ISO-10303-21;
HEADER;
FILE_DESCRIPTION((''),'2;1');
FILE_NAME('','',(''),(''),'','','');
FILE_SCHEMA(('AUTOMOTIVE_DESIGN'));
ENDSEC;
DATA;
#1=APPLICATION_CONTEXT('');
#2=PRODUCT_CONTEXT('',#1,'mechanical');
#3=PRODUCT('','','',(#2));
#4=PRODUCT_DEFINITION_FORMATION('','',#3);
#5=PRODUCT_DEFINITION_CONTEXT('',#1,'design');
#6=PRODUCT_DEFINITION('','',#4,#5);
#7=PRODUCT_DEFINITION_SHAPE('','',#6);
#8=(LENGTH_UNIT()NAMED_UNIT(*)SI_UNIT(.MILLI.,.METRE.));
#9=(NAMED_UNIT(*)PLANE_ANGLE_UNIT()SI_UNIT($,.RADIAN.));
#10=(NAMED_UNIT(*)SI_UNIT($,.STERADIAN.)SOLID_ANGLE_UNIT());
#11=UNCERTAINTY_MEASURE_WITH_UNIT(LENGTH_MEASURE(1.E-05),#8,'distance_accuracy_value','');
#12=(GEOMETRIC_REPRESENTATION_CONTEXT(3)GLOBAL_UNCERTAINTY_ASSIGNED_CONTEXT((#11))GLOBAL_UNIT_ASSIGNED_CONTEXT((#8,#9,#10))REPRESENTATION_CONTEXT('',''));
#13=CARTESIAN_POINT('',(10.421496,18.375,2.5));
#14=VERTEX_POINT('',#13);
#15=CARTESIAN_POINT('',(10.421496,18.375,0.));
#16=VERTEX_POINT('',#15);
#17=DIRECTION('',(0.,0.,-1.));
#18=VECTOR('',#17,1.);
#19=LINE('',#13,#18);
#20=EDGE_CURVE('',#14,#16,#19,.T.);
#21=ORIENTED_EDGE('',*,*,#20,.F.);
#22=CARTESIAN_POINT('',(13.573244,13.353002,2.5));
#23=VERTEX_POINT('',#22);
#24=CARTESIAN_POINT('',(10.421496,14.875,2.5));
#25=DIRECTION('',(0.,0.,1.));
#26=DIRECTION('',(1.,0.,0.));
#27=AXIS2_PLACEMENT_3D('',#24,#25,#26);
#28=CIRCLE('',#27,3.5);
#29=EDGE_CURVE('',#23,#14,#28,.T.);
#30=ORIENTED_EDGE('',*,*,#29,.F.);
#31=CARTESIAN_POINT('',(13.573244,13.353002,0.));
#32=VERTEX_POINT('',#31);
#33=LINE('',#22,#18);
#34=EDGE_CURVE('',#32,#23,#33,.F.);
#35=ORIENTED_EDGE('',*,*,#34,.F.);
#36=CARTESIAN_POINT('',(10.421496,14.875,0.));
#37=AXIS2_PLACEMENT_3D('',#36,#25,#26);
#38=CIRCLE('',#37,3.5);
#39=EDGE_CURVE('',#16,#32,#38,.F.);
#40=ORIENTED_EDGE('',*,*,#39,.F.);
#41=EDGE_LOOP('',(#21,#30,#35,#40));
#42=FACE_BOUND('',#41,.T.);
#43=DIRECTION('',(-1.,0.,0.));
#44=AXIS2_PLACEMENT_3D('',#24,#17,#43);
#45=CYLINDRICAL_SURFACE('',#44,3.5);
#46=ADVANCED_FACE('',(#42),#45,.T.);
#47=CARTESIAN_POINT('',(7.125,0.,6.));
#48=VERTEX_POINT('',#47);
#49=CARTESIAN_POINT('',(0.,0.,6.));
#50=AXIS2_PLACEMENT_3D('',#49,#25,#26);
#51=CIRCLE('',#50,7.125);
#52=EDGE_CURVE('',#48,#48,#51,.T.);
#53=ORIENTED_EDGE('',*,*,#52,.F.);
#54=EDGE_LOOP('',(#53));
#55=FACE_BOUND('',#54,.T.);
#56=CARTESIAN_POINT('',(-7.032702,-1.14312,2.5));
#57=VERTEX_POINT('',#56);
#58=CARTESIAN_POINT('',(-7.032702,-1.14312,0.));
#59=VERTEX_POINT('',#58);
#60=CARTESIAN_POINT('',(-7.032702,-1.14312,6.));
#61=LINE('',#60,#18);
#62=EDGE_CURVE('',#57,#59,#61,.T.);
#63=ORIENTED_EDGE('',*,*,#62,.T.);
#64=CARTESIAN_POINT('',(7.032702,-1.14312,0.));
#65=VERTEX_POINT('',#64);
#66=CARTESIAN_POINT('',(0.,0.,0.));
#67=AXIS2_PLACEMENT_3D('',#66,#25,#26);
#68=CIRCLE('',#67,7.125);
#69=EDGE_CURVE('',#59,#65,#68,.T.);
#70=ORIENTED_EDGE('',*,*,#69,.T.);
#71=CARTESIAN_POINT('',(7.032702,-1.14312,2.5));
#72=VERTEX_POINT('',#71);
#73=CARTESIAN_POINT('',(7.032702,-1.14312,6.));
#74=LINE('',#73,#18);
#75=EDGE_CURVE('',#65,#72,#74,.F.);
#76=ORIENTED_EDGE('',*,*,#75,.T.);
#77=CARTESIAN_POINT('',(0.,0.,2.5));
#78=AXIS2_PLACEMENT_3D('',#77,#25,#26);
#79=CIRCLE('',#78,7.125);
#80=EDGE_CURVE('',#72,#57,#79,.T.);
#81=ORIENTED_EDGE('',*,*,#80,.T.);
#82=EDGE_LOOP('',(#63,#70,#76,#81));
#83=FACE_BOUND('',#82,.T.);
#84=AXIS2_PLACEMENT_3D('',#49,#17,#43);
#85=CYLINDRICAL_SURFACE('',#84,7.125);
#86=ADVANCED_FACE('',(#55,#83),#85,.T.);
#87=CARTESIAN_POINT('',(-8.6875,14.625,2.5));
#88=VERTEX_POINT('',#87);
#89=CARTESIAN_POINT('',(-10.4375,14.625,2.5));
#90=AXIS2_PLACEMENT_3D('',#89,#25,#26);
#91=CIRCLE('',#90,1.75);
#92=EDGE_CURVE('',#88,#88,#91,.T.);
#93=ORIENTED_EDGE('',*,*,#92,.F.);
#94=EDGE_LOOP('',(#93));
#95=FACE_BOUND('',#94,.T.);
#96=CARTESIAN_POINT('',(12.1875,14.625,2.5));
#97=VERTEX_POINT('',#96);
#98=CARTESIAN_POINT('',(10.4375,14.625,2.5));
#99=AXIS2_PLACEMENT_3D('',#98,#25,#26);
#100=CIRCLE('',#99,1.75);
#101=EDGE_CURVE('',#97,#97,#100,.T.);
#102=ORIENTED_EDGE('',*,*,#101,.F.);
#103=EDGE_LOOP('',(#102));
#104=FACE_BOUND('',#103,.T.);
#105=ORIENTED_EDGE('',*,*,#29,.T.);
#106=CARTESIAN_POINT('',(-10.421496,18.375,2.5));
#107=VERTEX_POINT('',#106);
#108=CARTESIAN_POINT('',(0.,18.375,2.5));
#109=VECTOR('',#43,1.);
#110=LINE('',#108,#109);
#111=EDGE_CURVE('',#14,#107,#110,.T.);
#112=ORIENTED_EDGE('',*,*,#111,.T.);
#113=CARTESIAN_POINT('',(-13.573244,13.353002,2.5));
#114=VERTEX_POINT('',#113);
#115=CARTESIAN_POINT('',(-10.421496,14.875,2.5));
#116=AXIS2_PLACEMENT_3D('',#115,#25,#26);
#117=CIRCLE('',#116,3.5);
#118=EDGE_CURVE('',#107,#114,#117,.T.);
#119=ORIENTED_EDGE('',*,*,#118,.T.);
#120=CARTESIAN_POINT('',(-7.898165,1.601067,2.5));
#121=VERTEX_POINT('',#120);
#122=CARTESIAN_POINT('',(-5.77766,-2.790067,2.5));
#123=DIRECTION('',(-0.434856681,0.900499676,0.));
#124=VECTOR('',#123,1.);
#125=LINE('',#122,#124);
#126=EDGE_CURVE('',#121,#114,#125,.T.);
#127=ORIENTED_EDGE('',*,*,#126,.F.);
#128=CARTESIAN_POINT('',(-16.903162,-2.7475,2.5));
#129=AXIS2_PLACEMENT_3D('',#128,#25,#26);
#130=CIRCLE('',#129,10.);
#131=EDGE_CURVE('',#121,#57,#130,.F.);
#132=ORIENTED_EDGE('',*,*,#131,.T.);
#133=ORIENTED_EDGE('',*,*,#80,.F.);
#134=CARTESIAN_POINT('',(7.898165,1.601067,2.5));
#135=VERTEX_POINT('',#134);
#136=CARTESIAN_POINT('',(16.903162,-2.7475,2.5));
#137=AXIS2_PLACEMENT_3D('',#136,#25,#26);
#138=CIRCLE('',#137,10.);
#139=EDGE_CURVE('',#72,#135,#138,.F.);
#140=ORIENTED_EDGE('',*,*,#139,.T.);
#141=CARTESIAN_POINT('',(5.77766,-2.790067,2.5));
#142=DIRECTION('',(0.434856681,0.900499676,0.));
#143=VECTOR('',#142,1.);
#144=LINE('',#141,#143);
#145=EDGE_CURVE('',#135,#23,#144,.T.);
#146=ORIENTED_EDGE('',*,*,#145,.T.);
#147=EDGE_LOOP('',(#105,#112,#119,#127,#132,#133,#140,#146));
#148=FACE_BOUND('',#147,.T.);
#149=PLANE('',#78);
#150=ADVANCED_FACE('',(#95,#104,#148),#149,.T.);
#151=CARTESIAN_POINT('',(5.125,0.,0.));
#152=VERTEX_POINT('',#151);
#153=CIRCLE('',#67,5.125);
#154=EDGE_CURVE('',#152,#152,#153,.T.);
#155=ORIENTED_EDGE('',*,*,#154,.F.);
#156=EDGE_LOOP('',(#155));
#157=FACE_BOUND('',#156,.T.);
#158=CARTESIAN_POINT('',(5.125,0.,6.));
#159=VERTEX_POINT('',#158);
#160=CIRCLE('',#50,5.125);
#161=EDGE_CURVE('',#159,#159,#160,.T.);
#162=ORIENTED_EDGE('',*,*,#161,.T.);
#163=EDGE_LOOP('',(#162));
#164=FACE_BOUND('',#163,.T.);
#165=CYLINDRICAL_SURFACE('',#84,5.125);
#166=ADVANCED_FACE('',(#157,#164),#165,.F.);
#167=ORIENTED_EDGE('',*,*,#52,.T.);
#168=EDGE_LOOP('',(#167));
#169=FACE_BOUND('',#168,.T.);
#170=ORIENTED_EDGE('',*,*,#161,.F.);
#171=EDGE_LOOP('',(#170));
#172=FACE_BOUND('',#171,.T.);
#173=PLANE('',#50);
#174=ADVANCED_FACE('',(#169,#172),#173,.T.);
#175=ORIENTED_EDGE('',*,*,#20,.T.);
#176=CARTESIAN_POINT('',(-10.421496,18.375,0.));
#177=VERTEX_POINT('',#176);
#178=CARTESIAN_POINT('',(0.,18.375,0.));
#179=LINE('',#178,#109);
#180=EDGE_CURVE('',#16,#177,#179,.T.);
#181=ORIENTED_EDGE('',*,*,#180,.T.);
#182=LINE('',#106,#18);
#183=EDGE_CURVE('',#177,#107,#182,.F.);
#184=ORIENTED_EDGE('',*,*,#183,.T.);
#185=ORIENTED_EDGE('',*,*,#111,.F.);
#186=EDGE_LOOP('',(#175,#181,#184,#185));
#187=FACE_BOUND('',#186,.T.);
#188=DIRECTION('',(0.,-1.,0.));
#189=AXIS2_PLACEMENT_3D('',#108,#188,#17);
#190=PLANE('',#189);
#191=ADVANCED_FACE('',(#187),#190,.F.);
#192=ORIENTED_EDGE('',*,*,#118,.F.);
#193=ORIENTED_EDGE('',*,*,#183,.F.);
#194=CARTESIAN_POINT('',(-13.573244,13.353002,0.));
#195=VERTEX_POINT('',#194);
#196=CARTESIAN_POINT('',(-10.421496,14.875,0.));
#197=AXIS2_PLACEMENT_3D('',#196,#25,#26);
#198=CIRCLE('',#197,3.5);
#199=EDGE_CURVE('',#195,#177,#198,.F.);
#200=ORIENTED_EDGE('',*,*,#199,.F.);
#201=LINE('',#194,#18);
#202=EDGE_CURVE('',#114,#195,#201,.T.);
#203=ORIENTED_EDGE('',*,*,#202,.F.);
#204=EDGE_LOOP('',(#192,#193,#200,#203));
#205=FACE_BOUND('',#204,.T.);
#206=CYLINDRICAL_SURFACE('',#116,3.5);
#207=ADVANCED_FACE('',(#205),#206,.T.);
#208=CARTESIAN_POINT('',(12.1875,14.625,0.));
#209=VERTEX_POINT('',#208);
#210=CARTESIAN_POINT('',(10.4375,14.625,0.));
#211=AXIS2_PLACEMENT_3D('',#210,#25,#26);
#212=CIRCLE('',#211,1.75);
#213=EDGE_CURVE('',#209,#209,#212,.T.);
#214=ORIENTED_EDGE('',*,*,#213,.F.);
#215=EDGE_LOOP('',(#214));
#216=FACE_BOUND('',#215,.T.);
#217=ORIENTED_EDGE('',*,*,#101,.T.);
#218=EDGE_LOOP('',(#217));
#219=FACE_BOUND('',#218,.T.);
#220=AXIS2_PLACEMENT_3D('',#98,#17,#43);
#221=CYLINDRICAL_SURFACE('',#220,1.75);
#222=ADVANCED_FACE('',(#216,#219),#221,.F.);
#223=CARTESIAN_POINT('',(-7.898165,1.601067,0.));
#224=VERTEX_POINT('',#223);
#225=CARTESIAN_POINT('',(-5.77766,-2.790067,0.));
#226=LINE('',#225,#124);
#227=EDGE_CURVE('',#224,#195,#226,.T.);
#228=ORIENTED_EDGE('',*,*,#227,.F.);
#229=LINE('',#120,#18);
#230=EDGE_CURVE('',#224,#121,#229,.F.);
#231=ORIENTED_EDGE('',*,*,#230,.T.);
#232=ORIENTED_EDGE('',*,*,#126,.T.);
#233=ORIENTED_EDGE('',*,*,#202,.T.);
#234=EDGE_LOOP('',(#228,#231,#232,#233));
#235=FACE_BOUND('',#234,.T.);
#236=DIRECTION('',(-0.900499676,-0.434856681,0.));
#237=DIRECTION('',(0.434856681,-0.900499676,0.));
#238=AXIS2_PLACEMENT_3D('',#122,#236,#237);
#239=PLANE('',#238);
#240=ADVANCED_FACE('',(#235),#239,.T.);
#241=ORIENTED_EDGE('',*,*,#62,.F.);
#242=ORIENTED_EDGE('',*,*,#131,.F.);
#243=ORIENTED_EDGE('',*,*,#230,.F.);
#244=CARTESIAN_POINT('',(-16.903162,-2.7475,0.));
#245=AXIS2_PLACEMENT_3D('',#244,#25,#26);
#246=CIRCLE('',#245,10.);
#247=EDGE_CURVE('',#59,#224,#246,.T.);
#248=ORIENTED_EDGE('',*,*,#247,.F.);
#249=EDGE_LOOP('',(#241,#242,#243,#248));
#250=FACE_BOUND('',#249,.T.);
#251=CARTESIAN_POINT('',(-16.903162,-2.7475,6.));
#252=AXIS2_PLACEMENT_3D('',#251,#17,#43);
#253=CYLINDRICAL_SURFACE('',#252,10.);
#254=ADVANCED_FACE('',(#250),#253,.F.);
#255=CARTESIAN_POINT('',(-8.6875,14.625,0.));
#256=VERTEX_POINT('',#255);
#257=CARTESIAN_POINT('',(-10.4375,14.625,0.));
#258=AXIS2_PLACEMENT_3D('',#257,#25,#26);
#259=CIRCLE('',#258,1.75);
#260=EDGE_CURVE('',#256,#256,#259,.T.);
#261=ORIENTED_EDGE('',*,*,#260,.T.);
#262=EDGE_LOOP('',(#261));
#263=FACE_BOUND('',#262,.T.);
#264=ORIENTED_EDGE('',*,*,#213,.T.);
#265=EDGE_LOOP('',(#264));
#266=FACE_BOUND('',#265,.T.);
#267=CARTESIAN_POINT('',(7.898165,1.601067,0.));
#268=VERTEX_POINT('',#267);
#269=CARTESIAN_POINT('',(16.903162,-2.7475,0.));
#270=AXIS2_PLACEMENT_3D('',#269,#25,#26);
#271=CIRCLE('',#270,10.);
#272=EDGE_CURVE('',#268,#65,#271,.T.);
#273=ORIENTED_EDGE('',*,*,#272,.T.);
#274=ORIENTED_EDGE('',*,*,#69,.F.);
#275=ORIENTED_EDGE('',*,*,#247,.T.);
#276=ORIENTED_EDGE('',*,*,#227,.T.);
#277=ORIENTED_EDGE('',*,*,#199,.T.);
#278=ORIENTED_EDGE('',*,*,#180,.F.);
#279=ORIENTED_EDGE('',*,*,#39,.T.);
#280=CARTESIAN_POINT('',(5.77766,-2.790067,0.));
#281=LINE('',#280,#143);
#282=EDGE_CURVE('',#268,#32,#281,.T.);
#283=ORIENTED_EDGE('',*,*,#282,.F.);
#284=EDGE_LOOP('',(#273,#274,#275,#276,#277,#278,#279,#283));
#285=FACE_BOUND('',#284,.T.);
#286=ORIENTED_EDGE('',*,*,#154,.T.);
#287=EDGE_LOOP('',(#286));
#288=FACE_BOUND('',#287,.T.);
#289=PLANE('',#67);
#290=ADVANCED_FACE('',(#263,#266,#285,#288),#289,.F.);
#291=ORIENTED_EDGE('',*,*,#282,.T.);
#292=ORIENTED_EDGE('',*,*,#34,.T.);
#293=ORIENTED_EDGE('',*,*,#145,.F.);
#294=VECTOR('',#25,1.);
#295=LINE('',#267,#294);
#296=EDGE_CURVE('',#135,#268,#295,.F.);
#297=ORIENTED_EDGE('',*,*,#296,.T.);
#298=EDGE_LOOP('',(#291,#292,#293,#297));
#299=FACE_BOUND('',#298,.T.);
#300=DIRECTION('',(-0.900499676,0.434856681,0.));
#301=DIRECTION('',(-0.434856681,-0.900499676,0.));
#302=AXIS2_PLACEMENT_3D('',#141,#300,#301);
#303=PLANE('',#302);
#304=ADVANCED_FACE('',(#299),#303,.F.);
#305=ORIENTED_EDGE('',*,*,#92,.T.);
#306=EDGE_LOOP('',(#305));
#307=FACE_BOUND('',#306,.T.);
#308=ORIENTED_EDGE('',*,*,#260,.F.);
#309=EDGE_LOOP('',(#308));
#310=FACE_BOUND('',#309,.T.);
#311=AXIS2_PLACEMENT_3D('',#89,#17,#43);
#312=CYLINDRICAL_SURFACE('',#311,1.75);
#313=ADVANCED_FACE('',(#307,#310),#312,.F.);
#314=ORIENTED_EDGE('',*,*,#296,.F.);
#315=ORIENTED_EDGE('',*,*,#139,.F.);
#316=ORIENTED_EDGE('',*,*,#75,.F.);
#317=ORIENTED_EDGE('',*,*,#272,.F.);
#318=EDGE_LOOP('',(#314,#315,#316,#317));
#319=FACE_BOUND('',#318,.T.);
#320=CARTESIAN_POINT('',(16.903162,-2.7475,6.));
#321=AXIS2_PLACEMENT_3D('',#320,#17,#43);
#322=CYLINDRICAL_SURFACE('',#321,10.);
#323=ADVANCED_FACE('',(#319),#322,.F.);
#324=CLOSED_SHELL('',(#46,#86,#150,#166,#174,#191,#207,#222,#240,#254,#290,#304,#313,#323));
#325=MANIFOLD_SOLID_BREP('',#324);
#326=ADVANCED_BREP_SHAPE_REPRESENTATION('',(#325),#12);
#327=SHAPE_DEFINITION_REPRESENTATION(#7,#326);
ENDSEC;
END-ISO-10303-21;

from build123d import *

# Parameters (mm, degrees)
ESQUISSE1_R        = 7.125
ESQUISSE1_R_2      = 5.125
BOSS_EXTRU_1_DEPTH = 6
ESQUISSE1_3_R      = 1.75
BOSS_EXTRU_2_DEPTH = 2.5
CONG_1_R           = 3.5
CONG_2_R           = 10


with BuildPart() as part:
    # Esquisse1 → Boss.-Extru.1 (new body)
    with BuildSketch(Plane.XY):
        Circle(ESQUISSE1_R)
        Circle(ESQUISSE1_R_2, mode=Mode.SUBTRACT)
    extrude(amount=BOSS_EXTRU_1_DEPTH)

    # Esquisse1<3> → Boss.-Extru.2 (add)
    # profile 1 of 2: a face of its own
    with BuildSketch(Plane.XY):
        with BuildLine():
            Line((-15.998397436, 18.375), (-7.125, 0))
            ThreePointArc((-7.125, 0), (-5.038135816, 5.038135816), (0, 7.125))
            Line((0, 7.125), (0, 18.375))
            Line((0, 18.375), (-15.998397436, 18.375))
        make_face()
        with Locations((-10.4375, 14.625)):
            Circle(ESQUISSE1_3_R, mode=Mode.SUBTRACT)
    # profile 2 of 2: a face of its own
    with BuildSketch(Plane.XY):
        with BuildLine():
            ThreePointArc((0, 7.125), (5.038135816, 5.038135816), (7.125, 0))
            Line((7.125, 0), (15.998397436, 18.375))
            Line((15.998397436, 18.375), (0, 18.375))
            Line((0, 18.375), (0, 7.125))
        make_face()
        with Locations((10.4375, 14.625)):
            Circle(ESQUISSE1_3_R, mode=Mode.SUBTRACT)
    extrude(amount=BOSS_EXTRU_2_DEPTH)

    # Congé1
    cong_1_edges = [part.edges().sort_by_distance(p)[0] for p in [
        (15.998397436, 18.375, 1.25),
        (-15.998397436, 18.375, 1.25),
    ]]
    fillet(cong_1_edges, radius=CONG_1_R)

    # Congé2
    # the kernel refuses this fillet: 10 mm, written as the material it adds along each edge
    with BuildSketch(Plane(origin=(-7.125, 0, 0), x_dir=(0.08048003783871222, -0.9967562207026748, 0), z_dir=(0, 0, 1))) as cong_2_piece_1:
        with BuildLine():
            CenterArc((1.951640918, -9.967562207), CONG_2_R, 94.61615885, 16.543856934)
            Line((-1.658097624, -0.641802846), (0, 0))
            ThreePointArc((0, 0), (0.57342027, -0.023111927), (1.146840539, 0))
        make_face()
    extrude(amount=2.5)
    with BuildSketch(Plane(origin=(7.125, 0, 0), x_dir=(0.4348566812294863, 0.900499676174332, 0), z_dir=(0, 0, 1))) as cong_2_piece_2:
        with BuildLine():
            CenterArc((1.77797599, -10), CONG_2_R, 90, 16.543856934)
            ThreePointArc((-1.069515889, -0.413979449), (-0.526415143, -0.228543352), (0, 0))
            Line((0, 0), (1.77797599, 0))
        make_face()
    extrude(amount=2.5)


solid = part.part
